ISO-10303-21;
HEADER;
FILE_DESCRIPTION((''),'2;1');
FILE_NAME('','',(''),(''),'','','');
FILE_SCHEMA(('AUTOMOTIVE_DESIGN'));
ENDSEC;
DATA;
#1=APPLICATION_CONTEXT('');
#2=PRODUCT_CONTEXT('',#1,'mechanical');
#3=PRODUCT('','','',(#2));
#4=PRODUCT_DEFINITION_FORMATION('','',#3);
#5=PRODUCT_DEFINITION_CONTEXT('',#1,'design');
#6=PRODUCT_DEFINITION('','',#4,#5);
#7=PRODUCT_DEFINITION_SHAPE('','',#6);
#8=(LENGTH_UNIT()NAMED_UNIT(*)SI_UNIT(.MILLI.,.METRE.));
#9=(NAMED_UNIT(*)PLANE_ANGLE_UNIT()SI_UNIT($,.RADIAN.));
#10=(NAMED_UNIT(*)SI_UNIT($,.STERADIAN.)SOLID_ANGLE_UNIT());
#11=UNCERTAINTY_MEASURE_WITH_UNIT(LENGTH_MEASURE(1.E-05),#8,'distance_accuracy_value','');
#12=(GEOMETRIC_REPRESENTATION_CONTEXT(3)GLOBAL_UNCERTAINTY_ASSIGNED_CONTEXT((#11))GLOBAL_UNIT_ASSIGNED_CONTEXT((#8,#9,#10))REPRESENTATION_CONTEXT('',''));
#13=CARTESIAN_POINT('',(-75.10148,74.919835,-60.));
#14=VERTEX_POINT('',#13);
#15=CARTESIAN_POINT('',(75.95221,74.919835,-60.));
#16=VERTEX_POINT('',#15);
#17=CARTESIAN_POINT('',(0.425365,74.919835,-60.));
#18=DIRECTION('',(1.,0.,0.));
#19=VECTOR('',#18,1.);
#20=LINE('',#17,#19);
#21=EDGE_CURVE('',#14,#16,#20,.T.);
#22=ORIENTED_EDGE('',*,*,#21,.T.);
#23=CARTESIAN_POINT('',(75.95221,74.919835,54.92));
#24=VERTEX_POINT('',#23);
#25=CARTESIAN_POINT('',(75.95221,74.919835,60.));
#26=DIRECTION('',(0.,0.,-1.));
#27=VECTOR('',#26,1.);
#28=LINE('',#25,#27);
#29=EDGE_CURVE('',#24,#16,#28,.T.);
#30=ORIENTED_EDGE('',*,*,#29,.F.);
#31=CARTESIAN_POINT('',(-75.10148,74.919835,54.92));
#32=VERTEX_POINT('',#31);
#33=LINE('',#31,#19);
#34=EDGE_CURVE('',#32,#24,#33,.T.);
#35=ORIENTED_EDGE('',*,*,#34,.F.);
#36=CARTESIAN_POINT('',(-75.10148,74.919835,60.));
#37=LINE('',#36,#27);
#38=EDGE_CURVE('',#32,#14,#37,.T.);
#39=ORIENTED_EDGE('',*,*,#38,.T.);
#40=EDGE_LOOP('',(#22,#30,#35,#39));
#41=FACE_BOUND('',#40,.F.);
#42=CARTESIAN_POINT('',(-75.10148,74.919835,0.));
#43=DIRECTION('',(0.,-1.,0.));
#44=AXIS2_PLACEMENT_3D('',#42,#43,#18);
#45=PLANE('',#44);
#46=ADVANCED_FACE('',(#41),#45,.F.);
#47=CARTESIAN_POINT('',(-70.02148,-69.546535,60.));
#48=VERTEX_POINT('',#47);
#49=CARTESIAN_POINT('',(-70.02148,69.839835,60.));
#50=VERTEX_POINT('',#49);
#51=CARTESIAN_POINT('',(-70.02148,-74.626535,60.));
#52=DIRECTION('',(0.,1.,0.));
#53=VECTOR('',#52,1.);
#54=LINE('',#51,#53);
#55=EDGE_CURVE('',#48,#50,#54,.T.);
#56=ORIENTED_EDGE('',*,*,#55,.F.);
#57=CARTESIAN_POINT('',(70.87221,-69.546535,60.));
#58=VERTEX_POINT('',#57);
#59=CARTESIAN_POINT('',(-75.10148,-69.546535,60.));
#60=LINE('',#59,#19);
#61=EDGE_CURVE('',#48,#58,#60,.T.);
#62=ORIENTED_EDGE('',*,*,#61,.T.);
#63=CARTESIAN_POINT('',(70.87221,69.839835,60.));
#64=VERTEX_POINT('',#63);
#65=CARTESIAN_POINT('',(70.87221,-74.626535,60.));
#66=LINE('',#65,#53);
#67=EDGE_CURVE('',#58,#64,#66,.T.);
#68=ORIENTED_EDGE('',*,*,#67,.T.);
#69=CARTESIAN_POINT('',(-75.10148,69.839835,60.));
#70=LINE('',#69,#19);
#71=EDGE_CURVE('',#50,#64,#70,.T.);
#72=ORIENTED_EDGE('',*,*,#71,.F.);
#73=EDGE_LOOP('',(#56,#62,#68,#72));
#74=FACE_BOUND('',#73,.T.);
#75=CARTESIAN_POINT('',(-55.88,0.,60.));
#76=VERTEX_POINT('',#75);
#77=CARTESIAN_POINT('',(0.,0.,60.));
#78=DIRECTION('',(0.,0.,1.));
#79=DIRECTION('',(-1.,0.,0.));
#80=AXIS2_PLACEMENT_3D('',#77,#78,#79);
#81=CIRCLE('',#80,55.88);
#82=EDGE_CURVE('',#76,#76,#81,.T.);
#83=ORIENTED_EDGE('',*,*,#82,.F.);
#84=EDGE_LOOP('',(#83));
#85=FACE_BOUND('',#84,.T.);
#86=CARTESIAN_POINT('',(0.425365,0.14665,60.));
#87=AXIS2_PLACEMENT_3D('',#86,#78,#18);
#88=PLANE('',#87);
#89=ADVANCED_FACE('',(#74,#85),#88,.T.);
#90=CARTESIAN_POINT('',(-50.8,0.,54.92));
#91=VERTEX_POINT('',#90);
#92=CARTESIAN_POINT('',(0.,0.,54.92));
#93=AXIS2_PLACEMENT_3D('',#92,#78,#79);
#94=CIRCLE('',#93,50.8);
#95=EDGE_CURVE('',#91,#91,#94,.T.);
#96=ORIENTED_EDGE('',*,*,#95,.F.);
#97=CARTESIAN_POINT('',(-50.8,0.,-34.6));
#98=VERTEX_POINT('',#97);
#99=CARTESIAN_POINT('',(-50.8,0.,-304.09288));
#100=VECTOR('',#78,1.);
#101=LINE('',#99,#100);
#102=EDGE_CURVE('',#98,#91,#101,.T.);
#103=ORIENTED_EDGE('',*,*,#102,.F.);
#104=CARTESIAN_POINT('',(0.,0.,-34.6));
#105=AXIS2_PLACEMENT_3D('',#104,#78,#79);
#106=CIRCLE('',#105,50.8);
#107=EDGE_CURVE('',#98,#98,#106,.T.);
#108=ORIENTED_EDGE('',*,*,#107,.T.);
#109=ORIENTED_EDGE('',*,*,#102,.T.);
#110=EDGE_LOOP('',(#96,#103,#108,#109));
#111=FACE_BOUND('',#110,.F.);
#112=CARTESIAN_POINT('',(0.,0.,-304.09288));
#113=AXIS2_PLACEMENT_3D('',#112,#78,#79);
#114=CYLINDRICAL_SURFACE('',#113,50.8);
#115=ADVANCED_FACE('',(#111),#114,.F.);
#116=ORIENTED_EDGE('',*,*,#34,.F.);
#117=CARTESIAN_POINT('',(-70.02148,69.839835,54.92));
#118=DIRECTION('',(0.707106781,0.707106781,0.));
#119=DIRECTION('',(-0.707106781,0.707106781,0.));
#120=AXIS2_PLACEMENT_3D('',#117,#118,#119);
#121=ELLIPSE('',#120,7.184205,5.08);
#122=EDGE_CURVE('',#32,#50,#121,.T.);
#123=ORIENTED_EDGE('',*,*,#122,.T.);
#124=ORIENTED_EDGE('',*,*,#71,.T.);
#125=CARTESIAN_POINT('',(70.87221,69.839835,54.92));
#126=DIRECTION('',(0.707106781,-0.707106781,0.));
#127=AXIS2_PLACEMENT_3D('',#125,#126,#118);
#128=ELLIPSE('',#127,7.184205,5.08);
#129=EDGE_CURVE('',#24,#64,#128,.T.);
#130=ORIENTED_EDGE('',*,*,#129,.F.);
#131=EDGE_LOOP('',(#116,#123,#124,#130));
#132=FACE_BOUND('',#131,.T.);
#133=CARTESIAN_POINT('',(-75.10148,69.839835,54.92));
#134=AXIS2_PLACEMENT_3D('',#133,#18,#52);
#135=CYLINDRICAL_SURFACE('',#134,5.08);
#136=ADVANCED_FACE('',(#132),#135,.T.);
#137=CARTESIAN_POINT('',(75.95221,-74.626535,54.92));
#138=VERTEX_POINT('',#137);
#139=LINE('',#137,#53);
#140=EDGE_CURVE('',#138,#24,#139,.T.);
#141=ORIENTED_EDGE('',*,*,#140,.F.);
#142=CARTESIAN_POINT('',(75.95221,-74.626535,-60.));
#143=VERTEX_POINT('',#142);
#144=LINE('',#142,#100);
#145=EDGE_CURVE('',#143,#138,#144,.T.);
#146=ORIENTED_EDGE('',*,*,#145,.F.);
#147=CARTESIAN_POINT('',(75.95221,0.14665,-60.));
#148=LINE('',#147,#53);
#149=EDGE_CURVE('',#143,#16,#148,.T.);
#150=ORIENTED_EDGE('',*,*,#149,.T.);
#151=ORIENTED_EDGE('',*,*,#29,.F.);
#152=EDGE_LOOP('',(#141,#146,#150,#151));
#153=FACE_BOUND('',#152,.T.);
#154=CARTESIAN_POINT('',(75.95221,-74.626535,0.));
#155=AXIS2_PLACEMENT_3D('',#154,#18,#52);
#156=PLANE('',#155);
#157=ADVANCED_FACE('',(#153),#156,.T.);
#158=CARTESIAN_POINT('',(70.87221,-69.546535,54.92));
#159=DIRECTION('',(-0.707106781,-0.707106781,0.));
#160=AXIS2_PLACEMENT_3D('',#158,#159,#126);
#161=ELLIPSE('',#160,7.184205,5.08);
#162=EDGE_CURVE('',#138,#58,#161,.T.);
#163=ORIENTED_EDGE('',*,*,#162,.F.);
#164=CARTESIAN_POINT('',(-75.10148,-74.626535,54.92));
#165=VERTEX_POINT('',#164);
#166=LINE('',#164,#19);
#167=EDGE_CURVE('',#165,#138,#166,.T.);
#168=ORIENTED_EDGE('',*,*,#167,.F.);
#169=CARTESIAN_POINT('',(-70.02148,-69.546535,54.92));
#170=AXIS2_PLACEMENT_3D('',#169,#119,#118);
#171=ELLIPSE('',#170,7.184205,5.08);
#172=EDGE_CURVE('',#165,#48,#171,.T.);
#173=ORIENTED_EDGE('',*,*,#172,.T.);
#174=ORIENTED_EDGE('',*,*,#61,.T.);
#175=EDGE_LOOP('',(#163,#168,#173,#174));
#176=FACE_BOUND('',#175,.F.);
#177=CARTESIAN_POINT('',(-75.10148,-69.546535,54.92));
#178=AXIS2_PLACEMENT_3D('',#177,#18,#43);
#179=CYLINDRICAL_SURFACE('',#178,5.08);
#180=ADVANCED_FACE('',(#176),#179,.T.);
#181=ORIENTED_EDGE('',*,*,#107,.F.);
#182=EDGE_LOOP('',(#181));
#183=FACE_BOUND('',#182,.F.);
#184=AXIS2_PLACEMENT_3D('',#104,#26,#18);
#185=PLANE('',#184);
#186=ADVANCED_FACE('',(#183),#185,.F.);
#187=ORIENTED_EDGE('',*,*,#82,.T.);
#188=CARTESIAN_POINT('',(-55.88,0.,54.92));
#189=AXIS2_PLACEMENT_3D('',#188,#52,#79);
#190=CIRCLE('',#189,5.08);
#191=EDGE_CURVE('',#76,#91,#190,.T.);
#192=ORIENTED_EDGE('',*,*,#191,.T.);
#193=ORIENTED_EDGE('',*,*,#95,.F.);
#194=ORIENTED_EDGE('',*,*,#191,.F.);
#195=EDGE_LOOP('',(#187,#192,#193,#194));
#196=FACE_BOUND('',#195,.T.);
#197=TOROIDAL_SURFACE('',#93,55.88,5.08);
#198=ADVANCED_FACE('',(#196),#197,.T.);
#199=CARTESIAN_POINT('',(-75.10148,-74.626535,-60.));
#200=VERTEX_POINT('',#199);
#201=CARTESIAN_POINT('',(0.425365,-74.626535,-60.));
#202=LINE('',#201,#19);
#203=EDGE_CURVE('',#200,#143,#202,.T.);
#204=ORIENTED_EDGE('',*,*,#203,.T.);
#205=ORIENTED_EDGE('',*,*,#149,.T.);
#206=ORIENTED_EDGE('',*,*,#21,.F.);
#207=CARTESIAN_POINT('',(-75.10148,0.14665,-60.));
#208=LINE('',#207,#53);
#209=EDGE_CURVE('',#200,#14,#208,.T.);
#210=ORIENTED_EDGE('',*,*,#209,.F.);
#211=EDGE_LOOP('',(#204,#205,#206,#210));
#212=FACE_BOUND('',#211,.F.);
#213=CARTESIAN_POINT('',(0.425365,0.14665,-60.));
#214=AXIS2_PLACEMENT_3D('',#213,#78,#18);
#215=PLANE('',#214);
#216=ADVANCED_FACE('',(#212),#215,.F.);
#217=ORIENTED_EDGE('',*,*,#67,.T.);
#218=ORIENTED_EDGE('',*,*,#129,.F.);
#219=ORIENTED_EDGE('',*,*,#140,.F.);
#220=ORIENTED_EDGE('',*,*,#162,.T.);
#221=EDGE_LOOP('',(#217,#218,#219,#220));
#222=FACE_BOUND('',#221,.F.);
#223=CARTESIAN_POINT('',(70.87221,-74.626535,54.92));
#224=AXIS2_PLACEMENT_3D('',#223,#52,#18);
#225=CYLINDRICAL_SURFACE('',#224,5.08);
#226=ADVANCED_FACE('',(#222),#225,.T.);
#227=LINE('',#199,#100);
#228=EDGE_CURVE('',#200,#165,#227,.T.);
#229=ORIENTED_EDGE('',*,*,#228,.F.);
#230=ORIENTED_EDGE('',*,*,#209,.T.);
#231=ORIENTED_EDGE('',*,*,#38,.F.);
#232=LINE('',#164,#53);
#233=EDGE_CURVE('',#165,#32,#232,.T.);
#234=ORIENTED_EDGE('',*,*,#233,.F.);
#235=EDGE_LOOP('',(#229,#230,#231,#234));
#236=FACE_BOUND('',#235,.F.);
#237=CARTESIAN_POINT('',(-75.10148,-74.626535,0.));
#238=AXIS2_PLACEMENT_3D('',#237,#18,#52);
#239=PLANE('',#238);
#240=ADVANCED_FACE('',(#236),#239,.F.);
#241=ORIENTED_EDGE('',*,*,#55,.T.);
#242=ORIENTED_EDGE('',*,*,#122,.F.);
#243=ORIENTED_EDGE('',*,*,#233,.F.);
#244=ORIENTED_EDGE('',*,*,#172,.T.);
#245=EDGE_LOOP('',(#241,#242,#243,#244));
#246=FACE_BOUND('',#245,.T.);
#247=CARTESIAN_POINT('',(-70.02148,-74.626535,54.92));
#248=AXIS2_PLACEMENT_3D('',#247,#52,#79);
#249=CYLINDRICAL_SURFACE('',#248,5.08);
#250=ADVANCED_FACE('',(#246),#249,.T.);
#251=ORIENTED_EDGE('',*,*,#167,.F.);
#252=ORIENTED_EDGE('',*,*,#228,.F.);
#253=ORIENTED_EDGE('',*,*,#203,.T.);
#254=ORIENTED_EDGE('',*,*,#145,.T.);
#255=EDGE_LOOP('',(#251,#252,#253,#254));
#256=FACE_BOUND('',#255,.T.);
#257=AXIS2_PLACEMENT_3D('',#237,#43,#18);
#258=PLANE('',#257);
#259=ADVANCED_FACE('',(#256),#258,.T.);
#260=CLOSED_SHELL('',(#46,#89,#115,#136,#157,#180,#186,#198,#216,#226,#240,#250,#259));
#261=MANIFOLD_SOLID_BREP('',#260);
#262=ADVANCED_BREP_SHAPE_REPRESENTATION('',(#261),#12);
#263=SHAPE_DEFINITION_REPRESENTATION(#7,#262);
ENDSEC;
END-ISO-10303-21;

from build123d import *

# Parameters (mm, degrees)
F0_W     = 151.0536894202
F0_H     = 149.5463699102
F1_DEPTH = 60
F3_D     = 101.6
F2_R     = 50.8282360812
F4_DEPTH = 25.4
F8_R     = 5.08


# Not quite as in the source:
# - the program builds the solid bodies; features that only make, move or delete a surface that nothing else refers to are left out


with BuildPart() as f1:
    # F0 (on Top) → F1 (new body, symmetric)
    with BuildSketch(Plane.XY):
        with Locations((0.4253648221, 0.1466497779)):
            Rectangle(F0_W, F0_H)
    extrude(amount=F1_DEPTH, both=True)

    # F3 (through all)
    with Locations(Plane(origin=(0, 0, -60), x_dir=(1, 0, 0), z_dir=(0, 0, -1))):
        with Locations((0, 0)):
            Hole(F3_D / 2)

    # F2 (on face) → F4 (join)
    with BuildSketch(Plane(origin=(0, 0, -60), x_dir=(1, 0, 0), z_dir=(0, 0, -1))):
        Circle(F2_R)
    extrude(amount=-F4_DEPTH)

    # F8
    f8_edges = [f1.edges().sort_by_distance(p)[0] for p in [
        (-75.10148, 0.14665, 60),
        (0.425365, 74.919835, 60),
        (0.425365, -74.626535, 60),
        (75.95221, 0.14665, 60),
        (-50.8, 0, 60),
    ]]
    fillet(f8_edges, radius=F8_R)


solid = f1.part
